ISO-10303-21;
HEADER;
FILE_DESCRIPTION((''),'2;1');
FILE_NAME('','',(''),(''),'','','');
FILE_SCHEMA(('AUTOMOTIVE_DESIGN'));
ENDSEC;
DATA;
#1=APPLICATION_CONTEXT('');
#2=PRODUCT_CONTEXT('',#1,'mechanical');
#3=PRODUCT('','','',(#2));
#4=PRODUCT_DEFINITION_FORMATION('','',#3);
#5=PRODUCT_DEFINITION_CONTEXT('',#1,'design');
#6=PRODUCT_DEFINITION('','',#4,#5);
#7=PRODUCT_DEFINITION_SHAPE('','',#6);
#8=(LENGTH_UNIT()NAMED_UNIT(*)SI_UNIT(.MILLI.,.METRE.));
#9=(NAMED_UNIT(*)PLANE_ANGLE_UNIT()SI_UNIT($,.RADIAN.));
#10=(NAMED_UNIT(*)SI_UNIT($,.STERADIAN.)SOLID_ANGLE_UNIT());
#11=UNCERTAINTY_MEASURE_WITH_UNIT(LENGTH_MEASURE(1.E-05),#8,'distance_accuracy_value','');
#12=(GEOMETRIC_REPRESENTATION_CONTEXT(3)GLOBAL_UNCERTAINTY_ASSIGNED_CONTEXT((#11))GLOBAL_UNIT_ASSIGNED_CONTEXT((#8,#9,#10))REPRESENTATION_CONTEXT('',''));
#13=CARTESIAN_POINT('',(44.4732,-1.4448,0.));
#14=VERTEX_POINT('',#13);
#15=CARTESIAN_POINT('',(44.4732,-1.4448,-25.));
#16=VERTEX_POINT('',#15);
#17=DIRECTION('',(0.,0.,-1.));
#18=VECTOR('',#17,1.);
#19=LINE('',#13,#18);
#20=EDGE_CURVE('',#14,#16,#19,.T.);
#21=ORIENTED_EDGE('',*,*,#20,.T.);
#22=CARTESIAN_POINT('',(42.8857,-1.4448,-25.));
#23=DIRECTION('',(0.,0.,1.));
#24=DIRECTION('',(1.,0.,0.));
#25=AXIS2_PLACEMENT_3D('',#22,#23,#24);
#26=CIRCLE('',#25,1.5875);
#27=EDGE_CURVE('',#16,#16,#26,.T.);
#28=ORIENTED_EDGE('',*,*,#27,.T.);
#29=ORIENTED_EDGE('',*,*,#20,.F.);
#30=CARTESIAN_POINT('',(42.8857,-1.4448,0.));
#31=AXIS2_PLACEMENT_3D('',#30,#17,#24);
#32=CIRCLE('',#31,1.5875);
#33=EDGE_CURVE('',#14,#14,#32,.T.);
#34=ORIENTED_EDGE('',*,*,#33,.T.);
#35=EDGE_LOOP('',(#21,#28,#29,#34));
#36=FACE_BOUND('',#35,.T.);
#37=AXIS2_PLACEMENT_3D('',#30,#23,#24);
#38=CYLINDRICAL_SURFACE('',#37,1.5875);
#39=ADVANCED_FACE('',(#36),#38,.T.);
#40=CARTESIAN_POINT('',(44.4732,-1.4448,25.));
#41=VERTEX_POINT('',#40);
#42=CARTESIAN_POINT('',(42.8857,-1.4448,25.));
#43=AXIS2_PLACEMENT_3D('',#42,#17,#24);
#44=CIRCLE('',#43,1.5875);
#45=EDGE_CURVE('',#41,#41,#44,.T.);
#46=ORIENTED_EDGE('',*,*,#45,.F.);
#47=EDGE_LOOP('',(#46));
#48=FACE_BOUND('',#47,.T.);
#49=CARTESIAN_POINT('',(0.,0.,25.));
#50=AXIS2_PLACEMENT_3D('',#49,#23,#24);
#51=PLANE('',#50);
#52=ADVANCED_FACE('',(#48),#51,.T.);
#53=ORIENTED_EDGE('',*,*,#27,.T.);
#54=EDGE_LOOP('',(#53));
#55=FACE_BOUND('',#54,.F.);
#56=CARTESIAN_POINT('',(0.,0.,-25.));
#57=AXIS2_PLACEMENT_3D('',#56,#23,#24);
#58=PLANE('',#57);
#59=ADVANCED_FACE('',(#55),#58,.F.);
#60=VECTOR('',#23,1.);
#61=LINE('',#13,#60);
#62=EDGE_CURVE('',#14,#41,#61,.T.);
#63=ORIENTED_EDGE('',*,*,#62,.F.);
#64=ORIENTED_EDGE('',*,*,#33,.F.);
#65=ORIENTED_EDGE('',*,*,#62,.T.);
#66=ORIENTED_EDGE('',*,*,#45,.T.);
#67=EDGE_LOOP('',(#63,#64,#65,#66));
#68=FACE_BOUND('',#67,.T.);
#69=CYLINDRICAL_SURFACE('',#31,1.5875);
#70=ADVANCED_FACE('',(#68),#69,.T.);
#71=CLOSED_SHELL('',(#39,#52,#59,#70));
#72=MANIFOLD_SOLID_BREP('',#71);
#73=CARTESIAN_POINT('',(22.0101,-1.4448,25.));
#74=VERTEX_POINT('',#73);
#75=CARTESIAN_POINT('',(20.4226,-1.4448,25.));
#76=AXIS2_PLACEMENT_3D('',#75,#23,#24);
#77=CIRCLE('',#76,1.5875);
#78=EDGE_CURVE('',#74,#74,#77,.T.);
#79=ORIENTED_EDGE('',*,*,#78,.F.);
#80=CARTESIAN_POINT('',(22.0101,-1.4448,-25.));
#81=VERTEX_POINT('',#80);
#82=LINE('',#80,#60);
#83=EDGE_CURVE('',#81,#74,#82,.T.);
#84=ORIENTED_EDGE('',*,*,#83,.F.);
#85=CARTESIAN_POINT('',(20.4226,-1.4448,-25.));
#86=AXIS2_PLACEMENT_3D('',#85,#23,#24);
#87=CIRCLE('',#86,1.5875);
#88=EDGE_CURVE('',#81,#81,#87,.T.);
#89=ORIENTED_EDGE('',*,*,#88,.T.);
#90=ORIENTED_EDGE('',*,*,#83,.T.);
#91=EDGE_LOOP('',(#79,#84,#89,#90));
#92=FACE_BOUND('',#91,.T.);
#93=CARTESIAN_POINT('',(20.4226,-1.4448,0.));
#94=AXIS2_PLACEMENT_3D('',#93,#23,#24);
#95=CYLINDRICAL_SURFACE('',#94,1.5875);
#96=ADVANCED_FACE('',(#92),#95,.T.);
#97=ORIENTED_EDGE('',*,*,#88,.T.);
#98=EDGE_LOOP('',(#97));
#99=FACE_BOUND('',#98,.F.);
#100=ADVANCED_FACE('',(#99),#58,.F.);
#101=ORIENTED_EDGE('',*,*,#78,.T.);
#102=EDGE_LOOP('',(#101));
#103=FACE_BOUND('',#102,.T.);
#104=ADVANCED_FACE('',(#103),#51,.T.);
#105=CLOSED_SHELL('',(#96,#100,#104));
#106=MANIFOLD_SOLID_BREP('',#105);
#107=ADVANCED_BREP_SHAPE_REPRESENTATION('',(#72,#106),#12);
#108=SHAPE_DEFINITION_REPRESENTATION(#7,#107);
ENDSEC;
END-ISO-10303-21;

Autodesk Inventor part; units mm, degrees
ref_plane "YZ Plane" through (0, 0, 0) normal (1, 0, 0) x (0, 1, 0)
ref_plane "XZ Plane" through (0, 0, 0) normal (0, 1, 0) x (-1, 0, 0)
ref_plane "XY Plane" through (0, 0, 0) normal (0, 0, 1) x (1, 0, 0)
surface "Composite1"
sketch "Sketch2" plane through (0, 0, 0) normal (0, 0, 1) x (1, 0, 0)
  line L0 (39.5181, -1.4448) -> (22.0101, -1.4448) projected
  circle A0 centre (20.4226, -1.4448) radius 1.5875
  line L1 (23.7903, -1.4448) -> (41.2982, -1.4448) projected
  circle A1 centre (42.8857, -1.4448) radius 1.5875
  line L2 (20.4226, -1.4448) -> (42.8857, -1.4448) construction
  point P0 (0, 0)
  dimension "d1" = 3.175
extrude "Extrusion1" add sketch "Sketch2" against normal mid plane 50
properties part number "Harken 22mm Cheek" material "Aluminum 6061"
